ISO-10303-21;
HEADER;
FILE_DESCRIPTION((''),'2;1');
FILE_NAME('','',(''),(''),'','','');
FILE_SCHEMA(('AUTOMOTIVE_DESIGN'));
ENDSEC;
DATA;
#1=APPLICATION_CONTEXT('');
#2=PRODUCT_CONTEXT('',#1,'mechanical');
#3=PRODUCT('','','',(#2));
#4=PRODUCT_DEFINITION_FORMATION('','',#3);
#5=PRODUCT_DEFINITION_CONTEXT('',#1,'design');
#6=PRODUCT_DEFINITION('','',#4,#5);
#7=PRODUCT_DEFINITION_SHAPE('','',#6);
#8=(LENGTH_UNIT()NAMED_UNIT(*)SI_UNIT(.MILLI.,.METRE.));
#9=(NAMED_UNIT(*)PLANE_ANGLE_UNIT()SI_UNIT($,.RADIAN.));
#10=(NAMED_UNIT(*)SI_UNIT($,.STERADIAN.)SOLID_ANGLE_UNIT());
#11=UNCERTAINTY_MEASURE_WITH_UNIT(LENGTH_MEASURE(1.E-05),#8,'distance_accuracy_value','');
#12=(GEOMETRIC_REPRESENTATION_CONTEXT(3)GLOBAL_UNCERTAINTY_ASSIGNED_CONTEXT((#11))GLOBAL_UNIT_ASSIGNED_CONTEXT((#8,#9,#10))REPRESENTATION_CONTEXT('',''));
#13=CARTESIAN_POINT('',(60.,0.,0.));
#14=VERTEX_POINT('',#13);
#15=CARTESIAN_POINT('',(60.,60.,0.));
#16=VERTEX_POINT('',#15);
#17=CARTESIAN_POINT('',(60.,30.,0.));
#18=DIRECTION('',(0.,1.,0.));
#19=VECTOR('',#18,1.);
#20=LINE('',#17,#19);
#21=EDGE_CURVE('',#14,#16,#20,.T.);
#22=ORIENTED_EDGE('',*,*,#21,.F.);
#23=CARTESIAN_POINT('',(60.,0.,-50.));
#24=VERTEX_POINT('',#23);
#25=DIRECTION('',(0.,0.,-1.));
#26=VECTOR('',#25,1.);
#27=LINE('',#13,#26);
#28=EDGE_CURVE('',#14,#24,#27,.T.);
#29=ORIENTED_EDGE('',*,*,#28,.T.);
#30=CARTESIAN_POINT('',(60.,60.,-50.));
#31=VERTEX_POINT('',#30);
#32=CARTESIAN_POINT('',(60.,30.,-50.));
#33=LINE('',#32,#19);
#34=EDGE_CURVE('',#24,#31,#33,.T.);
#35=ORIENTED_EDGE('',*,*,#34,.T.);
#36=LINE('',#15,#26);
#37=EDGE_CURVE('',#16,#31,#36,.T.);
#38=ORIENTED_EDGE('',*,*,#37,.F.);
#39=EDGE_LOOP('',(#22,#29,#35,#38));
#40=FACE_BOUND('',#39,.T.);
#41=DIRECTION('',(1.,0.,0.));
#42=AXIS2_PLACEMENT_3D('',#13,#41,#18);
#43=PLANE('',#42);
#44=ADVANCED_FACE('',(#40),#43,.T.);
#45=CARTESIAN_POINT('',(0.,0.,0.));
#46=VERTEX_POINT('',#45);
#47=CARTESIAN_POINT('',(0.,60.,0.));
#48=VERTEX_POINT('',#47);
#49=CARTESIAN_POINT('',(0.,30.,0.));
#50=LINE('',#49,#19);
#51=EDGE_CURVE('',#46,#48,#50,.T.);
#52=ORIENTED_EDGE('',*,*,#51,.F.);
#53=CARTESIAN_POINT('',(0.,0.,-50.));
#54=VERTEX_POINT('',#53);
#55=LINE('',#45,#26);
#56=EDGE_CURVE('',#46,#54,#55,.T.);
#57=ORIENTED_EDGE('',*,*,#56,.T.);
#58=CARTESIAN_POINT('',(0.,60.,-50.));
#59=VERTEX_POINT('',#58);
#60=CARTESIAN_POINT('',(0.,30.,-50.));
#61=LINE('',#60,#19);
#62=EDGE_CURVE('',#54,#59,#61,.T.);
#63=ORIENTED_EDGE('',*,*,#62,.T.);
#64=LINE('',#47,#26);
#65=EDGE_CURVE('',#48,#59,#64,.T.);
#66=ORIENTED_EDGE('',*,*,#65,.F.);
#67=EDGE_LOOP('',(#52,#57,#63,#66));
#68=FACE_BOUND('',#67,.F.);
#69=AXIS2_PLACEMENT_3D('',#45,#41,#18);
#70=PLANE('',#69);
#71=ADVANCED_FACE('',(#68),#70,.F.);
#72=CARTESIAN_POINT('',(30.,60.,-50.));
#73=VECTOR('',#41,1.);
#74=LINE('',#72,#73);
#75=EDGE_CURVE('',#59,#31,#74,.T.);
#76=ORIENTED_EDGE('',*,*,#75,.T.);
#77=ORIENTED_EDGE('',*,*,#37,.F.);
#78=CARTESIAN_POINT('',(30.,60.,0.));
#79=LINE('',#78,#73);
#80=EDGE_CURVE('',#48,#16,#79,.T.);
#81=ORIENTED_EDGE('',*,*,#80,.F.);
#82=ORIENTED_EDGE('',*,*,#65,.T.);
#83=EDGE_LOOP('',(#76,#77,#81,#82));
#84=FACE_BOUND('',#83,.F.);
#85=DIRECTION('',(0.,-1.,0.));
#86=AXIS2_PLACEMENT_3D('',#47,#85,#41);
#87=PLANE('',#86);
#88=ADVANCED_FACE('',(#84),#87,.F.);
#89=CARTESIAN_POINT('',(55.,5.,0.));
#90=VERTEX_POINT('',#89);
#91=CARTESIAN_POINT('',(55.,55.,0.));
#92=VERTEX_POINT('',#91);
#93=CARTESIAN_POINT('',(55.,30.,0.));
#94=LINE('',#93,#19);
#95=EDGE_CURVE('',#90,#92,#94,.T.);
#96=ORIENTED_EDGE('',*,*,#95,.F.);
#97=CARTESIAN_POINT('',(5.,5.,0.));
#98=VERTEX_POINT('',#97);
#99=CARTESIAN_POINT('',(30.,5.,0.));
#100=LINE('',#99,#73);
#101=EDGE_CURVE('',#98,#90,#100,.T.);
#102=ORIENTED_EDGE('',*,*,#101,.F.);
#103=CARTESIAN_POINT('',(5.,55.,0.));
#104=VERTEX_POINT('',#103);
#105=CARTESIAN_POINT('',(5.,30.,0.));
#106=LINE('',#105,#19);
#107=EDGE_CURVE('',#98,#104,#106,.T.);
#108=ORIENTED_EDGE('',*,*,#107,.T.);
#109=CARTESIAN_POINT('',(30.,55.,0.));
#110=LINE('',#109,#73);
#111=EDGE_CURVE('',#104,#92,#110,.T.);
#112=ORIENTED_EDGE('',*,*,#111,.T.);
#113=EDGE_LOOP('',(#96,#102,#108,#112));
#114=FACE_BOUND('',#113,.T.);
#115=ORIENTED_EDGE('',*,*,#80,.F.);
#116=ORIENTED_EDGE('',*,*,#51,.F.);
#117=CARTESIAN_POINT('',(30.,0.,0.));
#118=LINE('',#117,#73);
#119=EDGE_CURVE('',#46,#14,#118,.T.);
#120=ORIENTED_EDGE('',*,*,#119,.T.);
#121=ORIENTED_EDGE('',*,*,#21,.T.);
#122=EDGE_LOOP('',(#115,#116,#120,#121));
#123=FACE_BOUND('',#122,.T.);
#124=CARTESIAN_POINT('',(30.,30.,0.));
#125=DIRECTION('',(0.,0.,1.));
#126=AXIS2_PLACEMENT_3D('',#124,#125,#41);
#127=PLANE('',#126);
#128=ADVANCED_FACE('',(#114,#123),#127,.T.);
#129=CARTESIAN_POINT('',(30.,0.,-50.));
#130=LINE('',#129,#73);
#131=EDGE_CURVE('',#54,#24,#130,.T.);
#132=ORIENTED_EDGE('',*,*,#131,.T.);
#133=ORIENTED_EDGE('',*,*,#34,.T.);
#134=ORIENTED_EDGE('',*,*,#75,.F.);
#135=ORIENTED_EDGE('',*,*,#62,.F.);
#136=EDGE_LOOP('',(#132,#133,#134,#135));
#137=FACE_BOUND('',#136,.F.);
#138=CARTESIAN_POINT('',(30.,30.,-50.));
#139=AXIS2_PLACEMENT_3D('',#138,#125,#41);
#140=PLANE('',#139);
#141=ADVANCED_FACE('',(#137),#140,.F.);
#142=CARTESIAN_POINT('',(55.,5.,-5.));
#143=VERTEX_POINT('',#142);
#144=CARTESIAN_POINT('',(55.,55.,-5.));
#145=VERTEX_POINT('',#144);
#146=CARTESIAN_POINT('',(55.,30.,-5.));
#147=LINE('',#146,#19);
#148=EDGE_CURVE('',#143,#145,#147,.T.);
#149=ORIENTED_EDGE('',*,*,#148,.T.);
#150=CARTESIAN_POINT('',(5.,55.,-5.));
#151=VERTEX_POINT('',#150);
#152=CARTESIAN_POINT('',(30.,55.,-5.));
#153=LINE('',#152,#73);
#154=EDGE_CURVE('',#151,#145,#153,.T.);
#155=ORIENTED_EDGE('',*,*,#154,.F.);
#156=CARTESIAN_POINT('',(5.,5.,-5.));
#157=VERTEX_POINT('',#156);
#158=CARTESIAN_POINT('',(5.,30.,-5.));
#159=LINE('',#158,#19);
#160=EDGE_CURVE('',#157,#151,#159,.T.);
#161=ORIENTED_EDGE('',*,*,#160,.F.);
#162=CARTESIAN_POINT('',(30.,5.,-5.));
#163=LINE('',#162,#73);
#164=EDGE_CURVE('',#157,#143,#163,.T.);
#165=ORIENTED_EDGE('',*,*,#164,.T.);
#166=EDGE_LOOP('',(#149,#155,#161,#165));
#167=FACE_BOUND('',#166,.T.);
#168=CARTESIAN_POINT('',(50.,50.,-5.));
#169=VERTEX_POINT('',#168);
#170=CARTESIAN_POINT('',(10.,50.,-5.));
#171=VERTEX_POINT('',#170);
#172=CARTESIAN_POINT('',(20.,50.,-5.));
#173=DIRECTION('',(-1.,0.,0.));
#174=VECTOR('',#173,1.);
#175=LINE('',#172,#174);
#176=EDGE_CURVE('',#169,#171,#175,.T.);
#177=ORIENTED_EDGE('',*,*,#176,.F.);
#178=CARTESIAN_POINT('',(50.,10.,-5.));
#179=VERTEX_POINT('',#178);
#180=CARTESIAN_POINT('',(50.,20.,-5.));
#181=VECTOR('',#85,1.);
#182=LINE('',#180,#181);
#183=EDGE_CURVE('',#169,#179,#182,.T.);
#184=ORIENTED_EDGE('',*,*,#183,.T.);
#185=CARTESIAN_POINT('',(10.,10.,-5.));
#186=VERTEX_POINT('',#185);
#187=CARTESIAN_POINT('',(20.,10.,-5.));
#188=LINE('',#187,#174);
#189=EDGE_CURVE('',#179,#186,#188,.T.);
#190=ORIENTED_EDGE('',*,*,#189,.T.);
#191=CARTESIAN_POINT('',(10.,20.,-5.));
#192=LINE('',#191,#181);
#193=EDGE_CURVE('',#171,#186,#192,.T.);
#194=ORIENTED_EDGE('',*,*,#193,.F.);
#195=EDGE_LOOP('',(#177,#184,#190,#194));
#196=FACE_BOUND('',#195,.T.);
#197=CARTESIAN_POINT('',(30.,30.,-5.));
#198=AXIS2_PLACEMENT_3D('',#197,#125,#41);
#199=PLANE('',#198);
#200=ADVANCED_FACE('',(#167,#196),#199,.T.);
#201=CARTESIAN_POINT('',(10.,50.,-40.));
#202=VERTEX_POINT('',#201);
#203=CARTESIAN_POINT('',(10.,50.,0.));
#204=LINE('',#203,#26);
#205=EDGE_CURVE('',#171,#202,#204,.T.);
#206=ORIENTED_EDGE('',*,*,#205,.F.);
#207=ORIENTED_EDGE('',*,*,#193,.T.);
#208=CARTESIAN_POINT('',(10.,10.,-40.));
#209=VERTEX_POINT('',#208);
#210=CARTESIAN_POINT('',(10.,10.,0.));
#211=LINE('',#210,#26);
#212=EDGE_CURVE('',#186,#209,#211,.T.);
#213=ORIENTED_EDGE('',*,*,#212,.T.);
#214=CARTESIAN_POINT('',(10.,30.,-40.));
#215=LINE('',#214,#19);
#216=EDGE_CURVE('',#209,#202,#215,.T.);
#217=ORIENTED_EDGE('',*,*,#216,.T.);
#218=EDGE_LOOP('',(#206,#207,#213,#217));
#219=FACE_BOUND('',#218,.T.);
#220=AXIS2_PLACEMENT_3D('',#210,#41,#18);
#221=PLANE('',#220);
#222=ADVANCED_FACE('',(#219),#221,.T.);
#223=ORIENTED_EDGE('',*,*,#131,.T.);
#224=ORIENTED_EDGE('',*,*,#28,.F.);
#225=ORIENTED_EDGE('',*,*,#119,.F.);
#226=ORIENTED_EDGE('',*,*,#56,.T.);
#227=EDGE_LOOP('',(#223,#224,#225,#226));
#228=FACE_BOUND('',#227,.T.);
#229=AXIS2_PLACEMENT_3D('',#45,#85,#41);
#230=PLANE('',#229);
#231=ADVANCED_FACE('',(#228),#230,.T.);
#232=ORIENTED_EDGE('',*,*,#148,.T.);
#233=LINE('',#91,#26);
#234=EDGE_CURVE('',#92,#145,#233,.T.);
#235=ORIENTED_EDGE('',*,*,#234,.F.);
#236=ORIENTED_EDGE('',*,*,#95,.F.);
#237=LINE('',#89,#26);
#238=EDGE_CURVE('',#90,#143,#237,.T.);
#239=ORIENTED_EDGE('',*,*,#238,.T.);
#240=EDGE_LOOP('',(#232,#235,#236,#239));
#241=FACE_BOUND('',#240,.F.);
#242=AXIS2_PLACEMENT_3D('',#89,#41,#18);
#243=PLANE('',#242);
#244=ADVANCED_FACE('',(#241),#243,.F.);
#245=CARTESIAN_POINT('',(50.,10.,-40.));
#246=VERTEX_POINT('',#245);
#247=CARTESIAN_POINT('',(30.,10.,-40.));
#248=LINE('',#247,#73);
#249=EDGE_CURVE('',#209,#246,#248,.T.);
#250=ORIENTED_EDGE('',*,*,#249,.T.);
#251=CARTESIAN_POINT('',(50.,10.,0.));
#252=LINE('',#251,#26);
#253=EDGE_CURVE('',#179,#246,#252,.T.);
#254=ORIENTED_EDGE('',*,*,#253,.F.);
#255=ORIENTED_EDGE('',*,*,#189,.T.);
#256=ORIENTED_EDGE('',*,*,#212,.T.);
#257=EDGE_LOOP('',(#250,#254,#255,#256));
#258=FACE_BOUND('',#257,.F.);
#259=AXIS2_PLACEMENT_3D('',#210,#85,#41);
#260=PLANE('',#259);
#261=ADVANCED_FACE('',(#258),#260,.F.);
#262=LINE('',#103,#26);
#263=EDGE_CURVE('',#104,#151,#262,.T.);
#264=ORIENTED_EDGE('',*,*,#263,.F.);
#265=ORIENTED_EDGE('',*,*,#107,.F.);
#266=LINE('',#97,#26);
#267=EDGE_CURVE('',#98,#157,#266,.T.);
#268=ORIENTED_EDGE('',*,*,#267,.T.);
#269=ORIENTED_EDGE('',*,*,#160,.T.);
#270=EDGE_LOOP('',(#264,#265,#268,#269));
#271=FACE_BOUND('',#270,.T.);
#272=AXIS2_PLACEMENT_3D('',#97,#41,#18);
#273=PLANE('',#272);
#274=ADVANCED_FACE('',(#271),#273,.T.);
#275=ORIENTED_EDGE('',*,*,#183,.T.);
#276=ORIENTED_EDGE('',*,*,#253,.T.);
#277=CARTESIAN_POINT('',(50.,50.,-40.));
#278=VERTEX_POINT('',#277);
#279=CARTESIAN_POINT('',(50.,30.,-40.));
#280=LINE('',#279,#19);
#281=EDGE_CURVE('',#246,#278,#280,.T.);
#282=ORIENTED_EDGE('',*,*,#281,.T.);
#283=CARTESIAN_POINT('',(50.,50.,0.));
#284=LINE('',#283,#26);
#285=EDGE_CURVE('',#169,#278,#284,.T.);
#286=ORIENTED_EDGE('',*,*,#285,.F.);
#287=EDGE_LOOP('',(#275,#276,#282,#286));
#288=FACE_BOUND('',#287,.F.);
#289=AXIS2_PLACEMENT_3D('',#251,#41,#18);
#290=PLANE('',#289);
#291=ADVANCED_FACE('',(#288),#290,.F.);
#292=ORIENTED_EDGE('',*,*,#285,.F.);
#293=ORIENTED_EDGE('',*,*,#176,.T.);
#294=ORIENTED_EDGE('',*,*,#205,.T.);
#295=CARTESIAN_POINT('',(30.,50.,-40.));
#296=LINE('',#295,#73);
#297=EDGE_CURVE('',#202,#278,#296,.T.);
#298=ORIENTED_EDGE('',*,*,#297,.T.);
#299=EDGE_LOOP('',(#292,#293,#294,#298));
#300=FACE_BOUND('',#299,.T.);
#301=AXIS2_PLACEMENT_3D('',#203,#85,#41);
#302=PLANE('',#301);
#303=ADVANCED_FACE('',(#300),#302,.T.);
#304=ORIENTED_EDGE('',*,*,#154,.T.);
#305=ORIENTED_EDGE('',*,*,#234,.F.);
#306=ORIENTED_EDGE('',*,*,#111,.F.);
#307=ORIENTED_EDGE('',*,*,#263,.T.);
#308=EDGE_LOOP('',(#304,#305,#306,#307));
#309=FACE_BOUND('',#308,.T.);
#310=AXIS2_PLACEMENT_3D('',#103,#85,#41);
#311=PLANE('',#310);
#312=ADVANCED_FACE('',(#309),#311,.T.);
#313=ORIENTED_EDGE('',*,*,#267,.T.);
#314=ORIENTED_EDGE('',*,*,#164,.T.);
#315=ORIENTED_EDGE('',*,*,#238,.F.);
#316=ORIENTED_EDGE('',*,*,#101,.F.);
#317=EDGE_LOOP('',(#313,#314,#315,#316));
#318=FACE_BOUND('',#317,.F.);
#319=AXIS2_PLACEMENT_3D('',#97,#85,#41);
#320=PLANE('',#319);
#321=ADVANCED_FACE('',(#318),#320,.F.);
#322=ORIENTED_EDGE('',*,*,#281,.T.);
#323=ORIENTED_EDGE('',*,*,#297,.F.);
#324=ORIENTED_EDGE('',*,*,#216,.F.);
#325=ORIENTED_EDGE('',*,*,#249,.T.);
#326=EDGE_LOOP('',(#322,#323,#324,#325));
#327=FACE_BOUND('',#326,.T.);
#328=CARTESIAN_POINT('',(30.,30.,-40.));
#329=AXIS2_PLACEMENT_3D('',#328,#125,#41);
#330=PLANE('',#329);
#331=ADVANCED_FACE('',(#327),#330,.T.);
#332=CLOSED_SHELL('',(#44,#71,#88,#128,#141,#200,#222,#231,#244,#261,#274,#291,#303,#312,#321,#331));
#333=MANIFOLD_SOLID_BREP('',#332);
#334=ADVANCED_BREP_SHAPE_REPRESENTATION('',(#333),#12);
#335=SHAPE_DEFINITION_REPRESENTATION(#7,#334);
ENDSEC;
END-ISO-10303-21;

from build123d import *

# Parameters (mm, degrees)
F0_W     = 60
F0_H     = 60
F1_DEPTH = 50
F2_W     = 40
F2_H     = 40
F3_DEPTH = 40
F4_W     = 50
F4_H     = 50
F5_DEPTH = 5


# Not quite as in the source:
# - a feature names something its author has since deleted; it is built from what else it names


with BuildPart() as f1:
    # F0 (on Top) → F1 (new body)
    with BuildSketch(Plane.XY):
        with Locations((30, 30)):
            Rectangle(F0_W, F0_H)
    extrude(amount=-F1_DEPTH)

    # F2 (on Top) → F3 (cut)
    with BuildSketch(Plane.XY):
        with Locations((30, 30)):
            Rectangle(F2_W, F2_H)
    extrude(amount=-F3_DEPTH, mode=Mode.SUBTRACT)

    # F4 (on Top) → F5 (cut)
    with BuildSketch(Plane.XY):
        with Locations((30, 30)):
            Rectangle(F4_W, F4_H)
    extrude(amount=-F5_DEPTH, mode=Mode.SUBTRACT)


solid = f1.part
